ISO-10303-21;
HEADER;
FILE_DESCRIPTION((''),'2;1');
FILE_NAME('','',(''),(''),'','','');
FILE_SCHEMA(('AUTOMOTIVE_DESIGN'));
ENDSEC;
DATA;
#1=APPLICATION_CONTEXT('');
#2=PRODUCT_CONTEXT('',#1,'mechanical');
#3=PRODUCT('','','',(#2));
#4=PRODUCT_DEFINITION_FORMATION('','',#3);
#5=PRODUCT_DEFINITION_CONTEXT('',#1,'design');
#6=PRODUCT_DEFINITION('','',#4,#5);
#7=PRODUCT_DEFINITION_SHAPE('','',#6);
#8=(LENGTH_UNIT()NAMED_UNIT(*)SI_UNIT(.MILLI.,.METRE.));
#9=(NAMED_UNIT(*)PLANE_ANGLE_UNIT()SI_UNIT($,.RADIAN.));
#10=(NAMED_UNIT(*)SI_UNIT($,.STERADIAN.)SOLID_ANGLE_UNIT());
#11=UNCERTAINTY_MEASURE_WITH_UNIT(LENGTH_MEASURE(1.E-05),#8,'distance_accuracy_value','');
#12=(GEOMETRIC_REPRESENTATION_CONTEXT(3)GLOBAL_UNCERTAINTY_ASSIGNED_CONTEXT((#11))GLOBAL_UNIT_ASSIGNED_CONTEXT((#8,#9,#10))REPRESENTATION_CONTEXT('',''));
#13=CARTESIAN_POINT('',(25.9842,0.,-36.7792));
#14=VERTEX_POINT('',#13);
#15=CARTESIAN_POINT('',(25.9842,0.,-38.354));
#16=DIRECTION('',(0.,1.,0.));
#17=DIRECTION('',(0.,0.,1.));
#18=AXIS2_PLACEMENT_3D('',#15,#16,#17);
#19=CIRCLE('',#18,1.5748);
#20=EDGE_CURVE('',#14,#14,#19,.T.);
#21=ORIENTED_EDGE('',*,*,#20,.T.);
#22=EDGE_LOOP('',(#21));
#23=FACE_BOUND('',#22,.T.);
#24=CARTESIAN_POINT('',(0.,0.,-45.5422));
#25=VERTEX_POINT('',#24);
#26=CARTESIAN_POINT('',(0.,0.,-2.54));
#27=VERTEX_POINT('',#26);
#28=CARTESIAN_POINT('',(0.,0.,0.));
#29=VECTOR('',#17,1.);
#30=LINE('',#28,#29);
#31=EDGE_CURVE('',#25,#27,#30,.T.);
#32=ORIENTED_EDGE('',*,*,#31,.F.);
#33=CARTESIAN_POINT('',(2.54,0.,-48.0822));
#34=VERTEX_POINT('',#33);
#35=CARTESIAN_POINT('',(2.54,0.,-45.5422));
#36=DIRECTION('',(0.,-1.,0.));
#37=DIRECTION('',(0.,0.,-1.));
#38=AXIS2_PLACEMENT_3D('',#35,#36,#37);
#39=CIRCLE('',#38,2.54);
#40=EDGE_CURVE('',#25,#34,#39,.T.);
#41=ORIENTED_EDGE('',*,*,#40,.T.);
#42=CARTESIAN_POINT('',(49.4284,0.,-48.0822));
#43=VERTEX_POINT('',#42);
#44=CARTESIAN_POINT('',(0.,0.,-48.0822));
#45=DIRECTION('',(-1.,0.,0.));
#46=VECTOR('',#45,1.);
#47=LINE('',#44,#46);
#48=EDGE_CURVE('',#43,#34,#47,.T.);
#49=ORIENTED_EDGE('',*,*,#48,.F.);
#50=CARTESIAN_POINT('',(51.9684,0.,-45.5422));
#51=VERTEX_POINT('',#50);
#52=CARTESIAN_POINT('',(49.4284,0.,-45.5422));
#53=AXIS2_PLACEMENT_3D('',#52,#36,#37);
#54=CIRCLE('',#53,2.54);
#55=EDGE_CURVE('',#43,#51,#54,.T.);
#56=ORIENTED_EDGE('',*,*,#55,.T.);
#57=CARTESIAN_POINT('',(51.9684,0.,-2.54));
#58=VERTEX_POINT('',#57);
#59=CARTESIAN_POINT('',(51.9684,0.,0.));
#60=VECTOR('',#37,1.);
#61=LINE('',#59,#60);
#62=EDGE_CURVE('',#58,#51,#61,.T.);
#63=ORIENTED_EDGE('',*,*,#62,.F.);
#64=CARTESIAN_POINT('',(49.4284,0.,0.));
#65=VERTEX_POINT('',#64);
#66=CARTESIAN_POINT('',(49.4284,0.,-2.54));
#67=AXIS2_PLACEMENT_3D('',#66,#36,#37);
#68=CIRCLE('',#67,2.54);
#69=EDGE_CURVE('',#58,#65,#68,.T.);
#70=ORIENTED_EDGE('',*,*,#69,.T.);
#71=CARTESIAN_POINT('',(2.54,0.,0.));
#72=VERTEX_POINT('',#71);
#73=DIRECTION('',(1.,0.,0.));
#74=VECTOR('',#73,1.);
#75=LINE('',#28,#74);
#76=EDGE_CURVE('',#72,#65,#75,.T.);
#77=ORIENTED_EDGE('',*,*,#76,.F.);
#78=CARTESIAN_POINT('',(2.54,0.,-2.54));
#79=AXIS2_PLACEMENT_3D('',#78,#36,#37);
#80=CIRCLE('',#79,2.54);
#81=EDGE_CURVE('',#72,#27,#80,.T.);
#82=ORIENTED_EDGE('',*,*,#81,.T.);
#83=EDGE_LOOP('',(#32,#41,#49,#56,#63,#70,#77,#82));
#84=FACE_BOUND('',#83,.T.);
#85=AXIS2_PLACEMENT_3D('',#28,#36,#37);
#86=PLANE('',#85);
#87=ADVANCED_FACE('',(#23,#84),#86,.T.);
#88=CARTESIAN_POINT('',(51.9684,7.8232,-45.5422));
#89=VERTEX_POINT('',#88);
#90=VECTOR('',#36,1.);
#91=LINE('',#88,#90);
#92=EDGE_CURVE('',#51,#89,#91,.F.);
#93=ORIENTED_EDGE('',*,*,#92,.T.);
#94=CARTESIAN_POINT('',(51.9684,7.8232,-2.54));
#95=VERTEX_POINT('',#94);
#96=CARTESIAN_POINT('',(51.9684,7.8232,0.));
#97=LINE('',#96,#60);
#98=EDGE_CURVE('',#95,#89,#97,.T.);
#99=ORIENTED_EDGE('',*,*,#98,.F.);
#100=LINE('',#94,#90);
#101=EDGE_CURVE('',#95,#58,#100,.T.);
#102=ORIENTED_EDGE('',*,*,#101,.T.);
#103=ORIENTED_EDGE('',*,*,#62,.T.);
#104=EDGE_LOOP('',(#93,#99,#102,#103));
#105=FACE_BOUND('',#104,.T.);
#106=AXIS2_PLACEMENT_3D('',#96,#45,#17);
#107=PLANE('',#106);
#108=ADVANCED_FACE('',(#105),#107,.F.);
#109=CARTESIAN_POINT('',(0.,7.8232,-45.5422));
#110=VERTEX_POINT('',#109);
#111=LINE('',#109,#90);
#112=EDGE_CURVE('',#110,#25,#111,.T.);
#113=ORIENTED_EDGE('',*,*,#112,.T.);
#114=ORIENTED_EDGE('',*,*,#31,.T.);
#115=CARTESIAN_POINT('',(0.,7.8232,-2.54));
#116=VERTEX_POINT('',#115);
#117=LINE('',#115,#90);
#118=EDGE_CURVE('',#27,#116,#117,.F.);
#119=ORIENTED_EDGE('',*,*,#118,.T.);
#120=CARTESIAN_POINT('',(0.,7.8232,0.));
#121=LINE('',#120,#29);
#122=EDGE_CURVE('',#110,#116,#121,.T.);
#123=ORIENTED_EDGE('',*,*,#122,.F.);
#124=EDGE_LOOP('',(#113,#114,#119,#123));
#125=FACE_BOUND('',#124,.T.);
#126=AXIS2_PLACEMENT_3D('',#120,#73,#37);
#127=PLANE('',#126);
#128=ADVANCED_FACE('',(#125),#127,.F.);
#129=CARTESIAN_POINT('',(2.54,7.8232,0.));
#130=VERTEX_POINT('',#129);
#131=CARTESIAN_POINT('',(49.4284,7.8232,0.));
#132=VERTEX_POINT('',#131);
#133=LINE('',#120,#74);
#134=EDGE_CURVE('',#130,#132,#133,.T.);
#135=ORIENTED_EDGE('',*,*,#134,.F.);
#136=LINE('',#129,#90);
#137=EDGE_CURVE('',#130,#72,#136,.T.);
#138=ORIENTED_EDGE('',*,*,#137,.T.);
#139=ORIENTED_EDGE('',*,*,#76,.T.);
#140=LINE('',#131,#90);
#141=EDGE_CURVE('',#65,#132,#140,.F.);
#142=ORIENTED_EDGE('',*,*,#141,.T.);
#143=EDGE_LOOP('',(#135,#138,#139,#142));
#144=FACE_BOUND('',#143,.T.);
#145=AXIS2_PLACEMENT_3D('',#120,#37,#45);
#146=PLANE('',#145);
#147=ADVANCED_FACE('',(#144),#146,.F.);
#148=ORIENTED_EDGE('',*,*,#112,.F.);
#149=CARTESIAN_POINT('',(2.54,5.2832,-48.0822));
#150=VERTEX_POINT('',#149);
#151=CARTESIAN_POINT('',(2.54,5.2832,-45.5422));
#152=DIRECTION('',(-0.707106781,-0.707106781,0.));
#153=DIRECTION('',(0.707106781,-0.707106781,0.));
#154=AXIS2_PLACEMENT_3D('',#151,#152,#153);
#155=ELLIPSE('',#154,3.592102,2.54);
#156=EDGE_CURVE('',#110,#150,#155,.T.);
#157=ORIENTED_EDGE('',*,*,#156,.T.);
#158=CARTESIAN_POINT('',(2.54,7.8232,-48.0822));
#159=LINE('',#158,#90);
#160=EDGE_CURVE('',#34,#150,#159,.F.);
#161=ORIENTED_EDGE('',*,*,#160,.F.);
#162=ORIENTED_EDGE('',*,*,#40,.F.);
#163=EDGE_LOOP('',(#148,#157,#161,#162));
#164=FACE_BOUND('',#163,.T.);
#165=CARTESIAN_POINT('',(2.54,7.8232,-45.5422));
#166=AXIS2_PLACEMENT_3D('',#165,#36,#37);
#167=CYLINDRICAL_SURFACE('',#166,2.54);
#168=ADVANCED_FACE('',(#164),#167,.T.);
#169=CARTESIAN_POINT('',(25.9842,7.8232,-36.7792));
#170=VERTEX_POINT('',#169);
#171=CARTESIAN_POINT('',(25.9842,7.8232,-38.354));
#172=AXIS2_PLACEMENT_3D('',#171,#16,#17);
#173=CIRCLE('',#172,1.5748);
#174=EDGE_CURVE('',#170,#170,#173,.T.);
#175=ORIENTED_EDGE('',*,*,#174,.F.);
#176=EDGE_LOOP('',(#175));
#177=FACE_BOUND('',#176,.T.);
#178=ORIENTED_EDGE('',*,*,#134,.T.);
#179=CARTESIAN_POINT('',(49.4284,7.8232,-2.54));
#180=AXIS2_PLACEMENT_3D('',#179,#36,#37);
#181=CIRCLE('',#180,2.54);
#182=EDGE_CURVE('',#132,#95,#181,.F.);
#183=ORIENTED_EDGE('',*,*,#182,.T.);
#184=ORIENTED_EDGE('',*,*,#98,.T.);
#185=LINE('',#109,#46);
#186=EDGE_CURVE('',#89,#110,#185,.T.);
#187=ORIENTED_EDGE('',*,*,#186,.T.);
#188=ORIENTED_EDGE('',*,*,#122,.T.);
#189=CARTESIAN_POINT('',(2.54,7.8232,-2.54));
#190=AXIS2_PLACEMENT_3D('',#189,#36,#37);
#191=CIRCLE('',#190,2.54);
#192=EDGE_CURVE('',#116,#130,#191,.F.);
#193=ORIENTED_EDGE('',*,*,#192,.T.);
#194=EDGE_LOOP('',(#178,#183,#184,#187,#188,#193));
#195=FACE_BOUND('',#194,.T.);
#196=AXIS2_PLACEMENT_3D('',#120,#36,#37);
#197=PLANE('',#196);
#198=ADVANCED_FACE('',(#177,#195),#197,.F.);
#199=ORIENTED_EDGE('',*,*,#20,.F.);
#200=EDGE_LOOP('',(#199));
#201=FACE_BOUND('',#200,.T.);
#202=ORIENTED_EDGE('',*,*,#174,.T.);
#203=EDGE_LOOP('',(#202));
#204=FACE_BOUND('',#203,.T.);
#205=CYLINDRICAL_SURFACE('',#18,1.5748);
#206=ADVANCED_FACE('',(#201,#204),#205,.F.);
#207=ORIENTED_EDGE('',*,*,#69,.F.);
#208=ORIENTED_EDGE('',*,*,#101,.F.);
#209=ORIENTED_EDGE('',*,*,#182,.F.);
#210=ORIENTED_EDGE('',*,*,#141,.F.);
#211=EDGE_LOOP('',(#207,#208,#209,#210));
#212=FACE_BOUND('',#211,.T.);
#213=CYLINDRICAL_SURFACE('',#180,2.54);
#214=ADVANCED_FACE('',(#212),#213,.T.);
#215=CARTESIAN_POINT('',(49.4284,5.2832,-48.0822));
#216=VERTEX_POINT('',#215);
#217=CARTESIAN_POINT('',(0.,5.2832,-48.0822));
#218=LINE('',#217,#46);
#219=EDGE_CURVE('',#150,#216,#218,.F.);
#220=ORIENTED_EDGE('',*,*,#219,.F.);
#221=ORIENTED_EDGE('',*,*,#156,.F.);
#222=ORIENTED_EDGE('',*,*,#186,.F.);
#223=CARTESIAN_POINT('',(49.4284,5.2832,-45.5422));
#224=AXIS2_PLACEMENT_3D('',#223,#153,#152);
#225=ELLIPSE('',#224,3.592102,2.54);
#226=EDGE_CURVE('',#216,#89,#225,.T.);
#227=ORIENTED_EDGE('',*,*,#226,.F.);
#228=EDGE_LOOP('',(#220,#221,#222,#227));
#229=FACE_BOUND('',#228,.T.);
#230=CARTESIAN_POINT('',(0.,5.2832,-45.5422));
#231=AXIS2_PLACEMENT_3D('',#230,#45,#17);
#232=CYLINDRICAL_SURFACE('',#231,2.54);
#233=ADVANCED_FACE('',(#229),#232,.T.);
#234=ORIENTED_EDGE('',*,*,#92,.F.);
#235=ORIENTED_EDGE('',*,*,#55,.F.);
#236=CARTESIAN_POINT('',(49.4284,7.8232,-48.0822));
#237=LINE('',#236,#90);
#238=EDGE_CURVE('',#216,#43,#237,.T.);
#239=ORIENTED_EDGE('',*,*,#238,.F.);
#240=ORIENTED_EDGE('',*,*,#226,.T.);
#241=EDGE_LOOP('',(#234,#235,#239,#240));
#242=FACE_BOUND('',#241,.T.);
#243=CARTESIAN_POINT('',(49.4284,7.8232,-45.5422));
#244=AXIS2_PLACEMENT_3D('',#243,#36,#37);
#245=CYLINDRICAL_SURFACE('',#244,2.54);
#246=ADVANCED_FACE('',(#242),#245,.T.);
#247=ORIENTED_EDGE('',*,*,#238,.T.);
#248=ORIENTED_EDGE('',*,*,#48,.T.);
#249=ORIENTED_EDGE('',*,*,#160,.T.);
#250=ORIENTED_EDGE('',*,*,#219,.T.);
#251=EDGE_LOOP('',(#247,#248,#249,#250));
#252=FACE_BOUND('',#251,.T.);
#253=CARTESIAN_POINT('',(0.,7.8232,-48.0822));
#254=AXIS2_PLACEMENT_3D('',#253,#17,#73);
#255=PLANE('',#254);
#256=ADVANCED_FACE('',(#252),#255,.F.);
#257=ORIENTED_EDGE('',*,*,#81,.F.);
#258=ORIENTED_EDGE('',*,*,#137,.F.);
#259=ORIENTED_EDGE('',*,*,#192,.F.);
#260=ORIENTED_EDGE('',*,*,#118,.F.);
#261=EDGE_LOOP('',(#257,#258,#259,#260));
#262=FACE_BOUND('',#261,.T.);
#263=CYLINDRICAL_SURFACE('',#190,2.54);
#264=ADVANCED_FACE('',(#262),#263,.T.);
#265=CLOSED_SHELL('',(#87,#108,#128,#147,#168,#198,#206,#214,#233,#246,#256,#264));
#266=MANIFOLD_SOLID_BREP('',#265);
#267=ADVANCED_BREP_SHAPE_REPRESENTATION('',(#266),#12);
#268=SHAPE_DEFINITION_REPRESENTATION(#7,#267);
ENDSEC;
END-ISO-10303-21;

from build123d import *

# Parameters (mm, degrees)
SKETCH1_W           = 51.9684
SKETCH1_H           = 48.0822
BOSS_EXTRUDE1_DEPTH = 7.8232
FILLET1_R           = 2.54
FILLET2_R           = 2.54
SKETCH3_R           = 1.5748
CUT_EXTRUDE1_DEPTH  = 72.230716785


with BuildPart() as part:
    # Sketch1 → Boss-Extrude1 (new body)
    with BuildSketch(Plane(origin=(0, 0, 0), x_dir=(1, 0, 0), z_dir=(0, 1, 0))):
        with Locations((25.9842, 24.0411)):
            Rectangle(SKETCH1_W, SKETCH1_H)
    extrude(amount=BOSS_EXTRUDE1_DEPTH)

    # Fillet1
    fillet1_edges = [part.edges().sort_by_distance(p)[0] for p in [
        (0, 3.9116, -48.0822),
        (51.9684, 3.9116, -48.0822),
        (51.9684, 3.9116, 0),
        (0, 3.9116, 0),
    ]]
    fillet(fillet1_edges, radius=FILLET1_R)

    # Fillet2
    # the kernel refuses this fillet: 2.54 mm, written as the material it takes off along each edge
    with BuildSketch(Plane(origin=(55.7784, 7.8232, -48.0822), x_dir=(0, 0, 1), z_dir=(-1, 0, 0))) as fillet2_piece_1:
        with BuildLine():
            CenterArc((FILLET2_R, -FILLET2_R), FILLET2_R, 90, 90)
            Line((0, -FILLET2_R), (0, 0))
            Line((0, 0), (FILLET2_R, 0))
        make_face()
    extrude(amount=59.5884, mode=Mode.SUBTRACT)

    # Sketch3 → Cut-Extrude1 (cut, through all)
    with BuildSketch(Plane(origin=(0, 7.8232, 0), x_dir=(1, 0, 0), z_dir=(0, 1, 0))):
        with Locations(Location((25.9842, 38.354, 0), (0, 0, 270))):
            Circle(SKETCH3_R)
    extrude(amount=-CUT_EXTRUDE1_DEPTH, mode=Mode.SUBTRACT)


solid = part.part
